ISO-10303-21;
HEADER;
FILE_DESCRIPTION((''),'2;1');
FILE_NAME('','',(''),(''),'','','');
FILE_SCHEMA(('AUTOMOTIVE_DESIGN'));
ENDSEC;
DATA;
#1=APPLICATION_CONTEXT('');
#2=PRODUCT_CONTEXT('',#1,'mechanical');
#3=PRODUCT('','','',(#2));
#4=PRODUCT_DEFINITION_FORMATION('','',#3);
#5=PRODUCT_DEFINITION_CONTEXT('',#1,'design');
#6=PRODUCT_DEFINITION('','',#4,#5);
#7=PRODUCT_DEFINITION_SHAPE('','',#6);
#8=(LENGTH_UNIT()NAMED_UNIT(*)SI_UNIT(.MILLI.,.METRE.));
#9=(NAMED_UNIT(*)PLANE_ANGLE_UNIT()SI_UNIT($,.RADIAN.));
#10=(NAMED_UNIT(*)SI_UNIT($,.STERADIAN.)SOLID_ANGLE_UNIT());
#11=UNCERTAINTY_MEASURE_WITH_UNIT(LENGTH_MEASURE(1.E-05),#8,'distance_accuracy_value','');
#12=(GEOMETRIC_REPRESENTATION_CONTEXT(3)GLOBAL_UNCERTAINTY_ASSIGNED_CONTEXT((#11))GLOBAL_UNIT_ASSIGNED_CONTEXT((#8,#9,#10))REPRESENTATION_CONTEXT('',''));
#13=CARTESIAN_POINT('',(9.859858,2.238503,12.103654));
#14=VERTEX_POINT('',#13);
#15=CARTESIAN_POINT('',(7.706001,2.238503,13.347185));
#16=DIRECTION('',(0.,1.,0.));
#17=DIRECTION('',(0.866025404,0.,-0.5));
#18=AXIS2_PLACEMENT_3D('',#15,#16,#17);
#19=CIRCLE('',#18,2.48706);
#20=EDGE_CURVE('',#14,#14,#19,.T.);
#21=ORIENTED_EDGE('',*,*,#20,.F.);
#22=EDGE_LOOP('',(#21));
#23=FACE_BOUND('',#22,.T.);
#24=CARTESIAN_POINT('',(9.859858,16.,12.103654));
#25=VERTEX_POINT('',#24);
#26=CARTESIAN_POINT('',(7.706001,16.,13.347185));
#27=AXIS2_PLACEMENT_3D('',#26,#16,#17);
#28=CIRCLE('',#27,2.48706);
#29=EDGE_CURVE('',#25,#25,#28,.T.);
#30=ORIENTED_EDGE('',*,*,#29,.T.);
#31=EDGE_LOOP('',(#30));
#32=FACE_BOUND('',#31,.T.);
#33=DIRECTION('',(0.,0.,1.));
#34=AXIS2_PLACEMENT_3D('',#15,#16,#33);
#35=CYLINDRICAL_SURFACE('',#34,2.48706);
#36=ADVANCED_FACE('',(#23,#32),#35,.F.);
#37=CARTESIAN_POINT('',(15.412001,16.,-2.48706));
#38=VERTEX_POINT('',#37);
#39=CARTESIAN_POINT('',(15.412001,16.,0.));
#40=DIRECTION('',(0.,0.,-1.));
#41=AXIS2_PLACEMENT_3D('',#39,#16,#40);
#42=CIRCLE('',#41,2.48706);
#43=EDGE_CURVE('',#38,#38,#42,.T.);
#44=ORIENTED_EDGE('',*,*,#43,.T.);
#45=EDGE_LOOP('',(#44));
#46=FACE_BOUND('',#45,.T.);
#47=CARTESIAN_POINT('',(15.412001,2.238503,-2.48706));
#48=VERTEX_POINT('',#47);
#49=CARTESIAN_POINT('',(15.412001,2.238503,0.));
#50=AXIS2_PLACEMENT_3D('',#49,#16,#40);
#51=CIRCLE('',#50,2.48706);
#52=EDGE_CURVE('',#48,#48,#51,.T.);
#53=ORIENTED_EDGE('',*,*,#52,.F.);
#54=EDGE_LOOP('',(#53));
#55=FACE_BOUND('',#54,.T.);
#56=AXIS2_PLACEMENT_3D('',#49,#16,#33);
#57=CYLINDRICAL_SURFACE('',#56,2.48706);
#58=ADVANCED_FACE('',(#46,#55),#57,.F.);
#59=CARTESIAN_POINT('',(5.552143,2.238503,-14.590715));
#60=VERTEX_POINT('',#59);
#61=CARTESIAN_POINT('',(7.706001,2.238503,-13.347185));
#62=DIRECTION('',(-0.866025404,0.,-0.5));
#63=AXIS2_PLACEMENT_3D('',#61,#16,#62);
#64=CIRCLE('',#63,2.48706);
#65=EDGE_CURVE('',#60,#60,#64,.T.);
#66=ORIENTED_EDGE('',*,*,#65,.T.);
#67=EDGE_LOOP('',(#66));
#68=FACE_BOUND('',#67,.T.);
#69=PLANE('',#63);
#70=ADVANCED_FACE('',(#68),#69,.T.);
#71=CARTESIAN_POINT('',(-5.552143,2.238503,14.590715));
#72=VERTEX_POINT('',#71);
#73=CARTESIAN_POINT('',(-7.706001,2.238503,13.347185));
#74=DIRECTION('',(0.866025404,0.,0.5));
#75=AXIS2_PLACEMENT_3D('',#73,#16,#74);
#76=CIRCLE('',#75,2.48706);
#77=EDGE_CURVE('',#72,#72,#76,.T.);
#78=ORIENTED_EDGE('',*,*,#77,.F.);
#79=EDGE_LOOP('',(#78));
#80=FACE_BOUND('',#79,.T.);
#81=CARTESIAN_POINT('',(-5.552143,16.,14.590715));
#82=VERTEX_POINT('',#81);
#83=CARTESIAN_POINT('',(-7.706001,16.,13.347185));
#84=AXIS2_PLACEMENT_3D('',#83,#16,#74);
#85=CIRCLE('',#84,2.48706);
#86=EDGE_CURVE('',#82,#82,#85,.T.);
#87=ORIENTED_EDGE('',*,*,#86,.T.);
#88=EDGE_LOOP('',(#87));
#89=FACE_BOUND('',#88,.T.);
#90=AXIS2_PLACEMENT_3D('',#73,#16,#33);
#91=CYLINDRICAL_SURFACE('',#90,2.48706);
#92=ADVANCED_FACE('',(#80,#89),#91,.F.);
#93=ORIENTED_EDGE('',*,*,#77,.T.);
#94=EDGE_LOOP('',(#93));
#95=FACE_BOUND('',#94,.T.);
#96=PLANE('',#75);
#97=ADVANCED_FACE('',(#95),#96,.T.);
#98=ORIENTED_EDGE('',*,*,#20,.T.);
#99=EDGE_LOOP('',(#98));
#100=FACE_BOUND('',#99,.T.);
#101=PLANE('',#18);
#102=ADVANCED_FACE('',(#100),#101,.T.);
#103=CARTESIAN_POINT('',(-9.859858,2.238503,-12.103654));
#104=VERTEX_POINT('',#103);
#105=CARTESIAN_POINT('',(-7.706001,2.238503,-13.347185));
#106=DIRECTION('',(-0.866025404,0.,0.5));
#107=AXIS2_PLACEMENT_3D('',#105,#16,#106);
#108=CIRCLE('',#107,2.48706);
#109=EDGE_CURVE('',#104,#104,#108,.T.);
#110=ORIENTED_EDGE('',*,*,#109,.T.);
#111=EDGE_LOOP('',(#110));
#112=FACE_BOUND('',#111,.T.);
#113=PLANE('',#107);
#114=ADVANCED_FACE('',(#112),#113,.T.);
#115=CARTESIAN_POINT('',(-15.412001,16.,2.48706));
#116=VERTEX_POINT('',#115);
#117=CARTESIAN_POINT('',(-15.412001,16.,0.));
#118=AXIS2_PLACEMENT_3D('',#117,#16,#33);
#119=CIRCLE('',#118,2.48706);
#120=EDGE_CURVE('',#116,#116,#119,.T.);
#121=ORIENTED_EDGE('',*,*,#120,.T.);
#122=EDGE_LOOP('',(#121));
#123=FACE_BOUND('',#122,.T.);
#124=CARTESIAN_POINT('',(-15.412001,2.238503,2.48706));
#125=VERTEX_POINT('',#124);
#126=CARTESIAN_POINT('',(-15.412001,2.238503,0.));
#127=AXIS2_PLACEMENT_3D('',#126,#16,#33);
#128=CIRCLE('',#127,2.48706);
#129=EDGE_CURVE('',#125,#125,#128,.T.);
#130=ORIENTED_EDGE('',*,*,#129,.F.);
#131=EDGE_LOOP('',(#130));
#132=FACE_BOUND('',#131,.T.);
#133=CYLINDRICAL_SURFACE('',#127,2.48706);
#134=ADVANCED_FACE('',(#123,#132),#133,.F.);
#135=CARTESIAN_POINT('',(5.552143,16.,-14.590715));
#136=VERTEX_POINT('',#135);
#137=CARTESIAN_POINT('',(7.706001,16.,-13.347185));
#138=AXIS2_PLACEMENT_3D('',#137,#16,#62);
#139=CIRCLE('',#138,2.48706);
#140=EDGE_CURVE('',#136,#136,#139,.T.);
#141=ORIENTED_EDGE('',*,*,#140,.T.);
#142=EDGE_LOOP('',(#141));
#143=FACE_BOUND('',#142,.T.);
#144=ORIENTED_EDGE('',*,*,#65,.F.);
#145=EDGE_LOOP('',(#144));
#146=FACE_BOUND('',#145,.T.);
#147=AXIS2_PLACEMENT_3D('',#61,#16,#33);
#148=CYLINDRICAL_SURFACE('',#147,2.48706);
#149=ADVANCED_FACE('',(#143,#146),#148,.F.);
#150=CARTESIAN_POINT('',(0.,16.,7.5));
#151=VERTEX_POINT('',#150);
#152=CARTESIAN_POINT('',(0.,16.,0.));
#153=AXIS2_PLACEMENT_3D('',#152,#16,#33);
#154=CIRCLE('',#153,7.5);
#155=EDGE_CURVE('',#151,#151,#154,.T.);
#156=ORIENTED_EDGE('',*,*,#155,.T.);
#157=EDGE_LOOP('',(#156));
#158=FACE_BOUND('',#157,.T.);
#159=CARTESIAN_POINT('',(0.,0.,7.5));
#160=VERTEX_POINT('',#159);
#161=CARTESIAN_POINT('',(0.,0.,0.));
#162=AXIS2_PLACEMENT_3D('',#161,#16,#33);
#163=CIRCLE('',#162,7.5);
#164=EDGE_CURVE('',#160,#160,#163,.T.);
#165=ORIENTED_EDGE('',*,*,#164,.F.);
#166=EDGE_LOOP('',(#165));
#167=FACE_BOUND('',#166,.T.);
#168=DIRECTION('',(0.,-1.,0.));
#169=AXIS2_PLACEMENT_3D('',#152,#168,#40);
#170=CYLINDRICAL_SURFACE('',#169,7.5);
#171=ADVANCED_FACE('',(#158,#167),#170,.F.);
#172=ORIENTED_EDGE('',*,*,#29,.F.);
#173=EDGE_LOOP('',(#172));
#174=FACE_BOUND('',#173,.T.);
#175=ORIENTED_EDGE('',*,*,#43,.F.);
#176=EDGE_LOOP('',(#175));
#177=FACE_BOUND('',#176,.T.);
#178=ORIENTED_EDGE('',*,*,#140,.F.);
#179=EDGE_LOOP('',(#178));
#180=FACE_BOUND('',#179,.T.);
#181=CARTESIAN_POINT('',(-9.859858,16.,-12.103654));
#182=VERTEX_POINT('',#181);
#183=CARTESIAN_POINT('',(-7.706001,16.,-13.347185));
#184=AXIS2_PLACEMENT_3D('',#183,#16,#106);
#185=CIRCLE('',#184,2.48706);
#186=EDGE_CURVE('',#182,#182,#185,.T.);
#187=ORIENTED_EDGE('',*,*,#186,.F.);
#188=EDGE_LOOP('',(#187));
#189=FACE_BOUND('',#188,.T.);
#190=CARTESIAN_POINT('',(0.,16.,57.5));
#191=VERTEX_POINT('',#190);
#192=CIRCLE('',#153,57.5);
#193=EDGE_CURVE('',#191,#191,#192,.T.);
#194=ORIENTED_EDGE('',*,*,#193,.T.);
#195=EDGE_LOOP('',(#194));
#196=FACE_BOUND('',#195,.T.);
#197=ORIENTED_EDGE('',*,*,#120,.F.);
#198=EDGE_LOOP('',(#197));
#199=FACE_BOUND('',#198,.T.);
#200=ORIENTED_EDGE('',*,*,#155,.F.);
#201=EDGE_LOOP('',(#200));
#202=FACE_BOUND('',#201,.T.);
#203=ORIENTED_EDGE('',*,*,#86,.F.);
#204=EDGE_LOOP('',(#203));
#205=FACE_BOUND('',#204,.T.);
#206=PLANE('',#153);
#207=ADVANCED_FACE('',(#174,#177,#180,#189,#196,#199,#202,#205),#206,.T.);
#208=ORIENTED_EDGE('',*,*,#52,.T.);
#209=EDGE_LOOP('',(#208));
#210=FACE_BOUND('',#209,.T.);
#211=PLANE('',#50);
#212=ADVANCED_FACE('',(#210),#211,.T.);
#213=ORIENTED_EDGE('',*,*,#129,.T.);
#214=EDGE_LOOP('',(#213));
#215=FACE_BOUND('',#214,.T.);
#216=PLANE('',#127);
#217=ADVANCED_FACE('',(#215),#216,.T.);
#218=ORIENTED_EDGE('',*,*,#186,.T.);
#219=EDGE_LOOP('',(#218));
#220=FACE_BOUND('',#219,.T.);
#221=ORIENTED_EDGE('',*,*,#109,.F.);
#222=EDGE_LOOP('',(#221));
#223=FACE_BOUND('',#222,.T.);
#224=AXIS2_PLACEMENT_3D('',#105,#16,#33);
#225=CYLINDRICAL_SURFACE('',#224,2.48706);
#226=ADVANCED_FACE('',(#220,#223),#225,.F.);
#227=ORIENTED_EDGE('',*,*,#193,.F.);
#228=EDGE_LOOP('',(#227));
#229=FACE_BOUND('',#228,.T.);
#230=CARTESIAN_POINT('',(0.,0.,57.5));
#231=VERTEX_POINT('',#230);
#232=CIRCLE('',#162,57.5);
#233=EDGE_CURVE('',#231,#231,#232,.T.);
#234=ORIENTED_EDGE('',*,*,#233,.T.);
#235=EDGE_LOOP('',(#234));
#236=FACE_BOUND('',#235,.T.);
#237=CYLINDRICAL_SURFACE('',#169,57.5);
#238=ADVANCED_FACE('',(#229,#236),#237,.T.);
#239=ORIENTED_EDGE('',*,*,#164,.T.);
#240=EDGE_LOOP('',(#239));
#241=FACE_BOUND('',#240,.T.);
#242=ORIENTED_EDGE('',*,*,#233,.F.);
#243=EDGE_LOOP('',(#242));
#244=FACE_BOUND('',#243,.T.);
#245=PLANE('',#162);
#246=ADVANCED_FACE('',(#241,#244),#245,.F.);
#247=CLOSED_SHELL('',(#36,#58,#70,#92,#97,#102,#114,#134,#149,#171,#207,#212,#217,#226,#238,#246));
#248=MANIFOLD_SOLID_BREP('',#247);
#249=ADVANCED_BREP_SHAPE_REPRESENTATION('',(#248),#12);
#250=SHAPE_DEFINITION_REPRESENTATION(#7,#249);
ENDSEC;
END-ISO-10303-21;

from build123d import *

# Parameters (mm, degrees)
SKETCH1_R           = 57.5
BOSS_EXTRUDE1_DEPTH = 16
SKETCH2_R           = 7.5
CUT_EXTRUDE1_DEPTH  = 83.876414015
SKETCH3_R           = 2.487060287
CUT_EXTRUDE2_DEPTH  = 13.761497294
CIRPATTERN1_COUNT   = 6


with BuildPart() as part:
    # Sketch1 → Boss-Extrude1 (new body)
    with BuildSketch(Plane(origin=(0, 0, 0), x_dir=(1, 0, 0), z_dir=(0, 1, 0))):
        Circle(SKETCH1_R)
    extrude(amount=BOSS_EXTRUDE1_DEPTH)

    # Sketch2 → Cut-Extrude1 (cut, through all)
    with BuildSketch(Plane(origin=(0, 0, 0), x_dir=(1, 0, 0), z_dir=(0, 1, 0))):
        Circle(SKETCH2_R)
    extrude(amount=CUT_EXTRUDE1_DEPTH, mode=Mode.SUBTRACT)

    # Sketch3 → Cut-Extrude2 (cut)
    with BuildSketch(Plane(origin=(0, 16, 0), x_dir=(1, 0, 0), z_dir=(0, 1, 0))):
        with Locations((-15.412001153, 0)):
            Circle(SKETCH3_R)
    cut_extrude2 = extrude(amount=-CUT_EXTRUDE2_DEPTH, mode=Mode.SUBTRACT)

    # CirPattern1: Cut-Extrude2 ×6 about axis
    cirpattern1_axis = Axis((0, 0, 0), (0, 1, 0))
    for i in range(1, CIRPATTERN1_COUNT):
        add(cut_extrude2.rotate(cirpattern1_axis, i * 360 / CIRPATTERN1_COUNT), mode=Mode.SUBTRACT)


solid = part.part
